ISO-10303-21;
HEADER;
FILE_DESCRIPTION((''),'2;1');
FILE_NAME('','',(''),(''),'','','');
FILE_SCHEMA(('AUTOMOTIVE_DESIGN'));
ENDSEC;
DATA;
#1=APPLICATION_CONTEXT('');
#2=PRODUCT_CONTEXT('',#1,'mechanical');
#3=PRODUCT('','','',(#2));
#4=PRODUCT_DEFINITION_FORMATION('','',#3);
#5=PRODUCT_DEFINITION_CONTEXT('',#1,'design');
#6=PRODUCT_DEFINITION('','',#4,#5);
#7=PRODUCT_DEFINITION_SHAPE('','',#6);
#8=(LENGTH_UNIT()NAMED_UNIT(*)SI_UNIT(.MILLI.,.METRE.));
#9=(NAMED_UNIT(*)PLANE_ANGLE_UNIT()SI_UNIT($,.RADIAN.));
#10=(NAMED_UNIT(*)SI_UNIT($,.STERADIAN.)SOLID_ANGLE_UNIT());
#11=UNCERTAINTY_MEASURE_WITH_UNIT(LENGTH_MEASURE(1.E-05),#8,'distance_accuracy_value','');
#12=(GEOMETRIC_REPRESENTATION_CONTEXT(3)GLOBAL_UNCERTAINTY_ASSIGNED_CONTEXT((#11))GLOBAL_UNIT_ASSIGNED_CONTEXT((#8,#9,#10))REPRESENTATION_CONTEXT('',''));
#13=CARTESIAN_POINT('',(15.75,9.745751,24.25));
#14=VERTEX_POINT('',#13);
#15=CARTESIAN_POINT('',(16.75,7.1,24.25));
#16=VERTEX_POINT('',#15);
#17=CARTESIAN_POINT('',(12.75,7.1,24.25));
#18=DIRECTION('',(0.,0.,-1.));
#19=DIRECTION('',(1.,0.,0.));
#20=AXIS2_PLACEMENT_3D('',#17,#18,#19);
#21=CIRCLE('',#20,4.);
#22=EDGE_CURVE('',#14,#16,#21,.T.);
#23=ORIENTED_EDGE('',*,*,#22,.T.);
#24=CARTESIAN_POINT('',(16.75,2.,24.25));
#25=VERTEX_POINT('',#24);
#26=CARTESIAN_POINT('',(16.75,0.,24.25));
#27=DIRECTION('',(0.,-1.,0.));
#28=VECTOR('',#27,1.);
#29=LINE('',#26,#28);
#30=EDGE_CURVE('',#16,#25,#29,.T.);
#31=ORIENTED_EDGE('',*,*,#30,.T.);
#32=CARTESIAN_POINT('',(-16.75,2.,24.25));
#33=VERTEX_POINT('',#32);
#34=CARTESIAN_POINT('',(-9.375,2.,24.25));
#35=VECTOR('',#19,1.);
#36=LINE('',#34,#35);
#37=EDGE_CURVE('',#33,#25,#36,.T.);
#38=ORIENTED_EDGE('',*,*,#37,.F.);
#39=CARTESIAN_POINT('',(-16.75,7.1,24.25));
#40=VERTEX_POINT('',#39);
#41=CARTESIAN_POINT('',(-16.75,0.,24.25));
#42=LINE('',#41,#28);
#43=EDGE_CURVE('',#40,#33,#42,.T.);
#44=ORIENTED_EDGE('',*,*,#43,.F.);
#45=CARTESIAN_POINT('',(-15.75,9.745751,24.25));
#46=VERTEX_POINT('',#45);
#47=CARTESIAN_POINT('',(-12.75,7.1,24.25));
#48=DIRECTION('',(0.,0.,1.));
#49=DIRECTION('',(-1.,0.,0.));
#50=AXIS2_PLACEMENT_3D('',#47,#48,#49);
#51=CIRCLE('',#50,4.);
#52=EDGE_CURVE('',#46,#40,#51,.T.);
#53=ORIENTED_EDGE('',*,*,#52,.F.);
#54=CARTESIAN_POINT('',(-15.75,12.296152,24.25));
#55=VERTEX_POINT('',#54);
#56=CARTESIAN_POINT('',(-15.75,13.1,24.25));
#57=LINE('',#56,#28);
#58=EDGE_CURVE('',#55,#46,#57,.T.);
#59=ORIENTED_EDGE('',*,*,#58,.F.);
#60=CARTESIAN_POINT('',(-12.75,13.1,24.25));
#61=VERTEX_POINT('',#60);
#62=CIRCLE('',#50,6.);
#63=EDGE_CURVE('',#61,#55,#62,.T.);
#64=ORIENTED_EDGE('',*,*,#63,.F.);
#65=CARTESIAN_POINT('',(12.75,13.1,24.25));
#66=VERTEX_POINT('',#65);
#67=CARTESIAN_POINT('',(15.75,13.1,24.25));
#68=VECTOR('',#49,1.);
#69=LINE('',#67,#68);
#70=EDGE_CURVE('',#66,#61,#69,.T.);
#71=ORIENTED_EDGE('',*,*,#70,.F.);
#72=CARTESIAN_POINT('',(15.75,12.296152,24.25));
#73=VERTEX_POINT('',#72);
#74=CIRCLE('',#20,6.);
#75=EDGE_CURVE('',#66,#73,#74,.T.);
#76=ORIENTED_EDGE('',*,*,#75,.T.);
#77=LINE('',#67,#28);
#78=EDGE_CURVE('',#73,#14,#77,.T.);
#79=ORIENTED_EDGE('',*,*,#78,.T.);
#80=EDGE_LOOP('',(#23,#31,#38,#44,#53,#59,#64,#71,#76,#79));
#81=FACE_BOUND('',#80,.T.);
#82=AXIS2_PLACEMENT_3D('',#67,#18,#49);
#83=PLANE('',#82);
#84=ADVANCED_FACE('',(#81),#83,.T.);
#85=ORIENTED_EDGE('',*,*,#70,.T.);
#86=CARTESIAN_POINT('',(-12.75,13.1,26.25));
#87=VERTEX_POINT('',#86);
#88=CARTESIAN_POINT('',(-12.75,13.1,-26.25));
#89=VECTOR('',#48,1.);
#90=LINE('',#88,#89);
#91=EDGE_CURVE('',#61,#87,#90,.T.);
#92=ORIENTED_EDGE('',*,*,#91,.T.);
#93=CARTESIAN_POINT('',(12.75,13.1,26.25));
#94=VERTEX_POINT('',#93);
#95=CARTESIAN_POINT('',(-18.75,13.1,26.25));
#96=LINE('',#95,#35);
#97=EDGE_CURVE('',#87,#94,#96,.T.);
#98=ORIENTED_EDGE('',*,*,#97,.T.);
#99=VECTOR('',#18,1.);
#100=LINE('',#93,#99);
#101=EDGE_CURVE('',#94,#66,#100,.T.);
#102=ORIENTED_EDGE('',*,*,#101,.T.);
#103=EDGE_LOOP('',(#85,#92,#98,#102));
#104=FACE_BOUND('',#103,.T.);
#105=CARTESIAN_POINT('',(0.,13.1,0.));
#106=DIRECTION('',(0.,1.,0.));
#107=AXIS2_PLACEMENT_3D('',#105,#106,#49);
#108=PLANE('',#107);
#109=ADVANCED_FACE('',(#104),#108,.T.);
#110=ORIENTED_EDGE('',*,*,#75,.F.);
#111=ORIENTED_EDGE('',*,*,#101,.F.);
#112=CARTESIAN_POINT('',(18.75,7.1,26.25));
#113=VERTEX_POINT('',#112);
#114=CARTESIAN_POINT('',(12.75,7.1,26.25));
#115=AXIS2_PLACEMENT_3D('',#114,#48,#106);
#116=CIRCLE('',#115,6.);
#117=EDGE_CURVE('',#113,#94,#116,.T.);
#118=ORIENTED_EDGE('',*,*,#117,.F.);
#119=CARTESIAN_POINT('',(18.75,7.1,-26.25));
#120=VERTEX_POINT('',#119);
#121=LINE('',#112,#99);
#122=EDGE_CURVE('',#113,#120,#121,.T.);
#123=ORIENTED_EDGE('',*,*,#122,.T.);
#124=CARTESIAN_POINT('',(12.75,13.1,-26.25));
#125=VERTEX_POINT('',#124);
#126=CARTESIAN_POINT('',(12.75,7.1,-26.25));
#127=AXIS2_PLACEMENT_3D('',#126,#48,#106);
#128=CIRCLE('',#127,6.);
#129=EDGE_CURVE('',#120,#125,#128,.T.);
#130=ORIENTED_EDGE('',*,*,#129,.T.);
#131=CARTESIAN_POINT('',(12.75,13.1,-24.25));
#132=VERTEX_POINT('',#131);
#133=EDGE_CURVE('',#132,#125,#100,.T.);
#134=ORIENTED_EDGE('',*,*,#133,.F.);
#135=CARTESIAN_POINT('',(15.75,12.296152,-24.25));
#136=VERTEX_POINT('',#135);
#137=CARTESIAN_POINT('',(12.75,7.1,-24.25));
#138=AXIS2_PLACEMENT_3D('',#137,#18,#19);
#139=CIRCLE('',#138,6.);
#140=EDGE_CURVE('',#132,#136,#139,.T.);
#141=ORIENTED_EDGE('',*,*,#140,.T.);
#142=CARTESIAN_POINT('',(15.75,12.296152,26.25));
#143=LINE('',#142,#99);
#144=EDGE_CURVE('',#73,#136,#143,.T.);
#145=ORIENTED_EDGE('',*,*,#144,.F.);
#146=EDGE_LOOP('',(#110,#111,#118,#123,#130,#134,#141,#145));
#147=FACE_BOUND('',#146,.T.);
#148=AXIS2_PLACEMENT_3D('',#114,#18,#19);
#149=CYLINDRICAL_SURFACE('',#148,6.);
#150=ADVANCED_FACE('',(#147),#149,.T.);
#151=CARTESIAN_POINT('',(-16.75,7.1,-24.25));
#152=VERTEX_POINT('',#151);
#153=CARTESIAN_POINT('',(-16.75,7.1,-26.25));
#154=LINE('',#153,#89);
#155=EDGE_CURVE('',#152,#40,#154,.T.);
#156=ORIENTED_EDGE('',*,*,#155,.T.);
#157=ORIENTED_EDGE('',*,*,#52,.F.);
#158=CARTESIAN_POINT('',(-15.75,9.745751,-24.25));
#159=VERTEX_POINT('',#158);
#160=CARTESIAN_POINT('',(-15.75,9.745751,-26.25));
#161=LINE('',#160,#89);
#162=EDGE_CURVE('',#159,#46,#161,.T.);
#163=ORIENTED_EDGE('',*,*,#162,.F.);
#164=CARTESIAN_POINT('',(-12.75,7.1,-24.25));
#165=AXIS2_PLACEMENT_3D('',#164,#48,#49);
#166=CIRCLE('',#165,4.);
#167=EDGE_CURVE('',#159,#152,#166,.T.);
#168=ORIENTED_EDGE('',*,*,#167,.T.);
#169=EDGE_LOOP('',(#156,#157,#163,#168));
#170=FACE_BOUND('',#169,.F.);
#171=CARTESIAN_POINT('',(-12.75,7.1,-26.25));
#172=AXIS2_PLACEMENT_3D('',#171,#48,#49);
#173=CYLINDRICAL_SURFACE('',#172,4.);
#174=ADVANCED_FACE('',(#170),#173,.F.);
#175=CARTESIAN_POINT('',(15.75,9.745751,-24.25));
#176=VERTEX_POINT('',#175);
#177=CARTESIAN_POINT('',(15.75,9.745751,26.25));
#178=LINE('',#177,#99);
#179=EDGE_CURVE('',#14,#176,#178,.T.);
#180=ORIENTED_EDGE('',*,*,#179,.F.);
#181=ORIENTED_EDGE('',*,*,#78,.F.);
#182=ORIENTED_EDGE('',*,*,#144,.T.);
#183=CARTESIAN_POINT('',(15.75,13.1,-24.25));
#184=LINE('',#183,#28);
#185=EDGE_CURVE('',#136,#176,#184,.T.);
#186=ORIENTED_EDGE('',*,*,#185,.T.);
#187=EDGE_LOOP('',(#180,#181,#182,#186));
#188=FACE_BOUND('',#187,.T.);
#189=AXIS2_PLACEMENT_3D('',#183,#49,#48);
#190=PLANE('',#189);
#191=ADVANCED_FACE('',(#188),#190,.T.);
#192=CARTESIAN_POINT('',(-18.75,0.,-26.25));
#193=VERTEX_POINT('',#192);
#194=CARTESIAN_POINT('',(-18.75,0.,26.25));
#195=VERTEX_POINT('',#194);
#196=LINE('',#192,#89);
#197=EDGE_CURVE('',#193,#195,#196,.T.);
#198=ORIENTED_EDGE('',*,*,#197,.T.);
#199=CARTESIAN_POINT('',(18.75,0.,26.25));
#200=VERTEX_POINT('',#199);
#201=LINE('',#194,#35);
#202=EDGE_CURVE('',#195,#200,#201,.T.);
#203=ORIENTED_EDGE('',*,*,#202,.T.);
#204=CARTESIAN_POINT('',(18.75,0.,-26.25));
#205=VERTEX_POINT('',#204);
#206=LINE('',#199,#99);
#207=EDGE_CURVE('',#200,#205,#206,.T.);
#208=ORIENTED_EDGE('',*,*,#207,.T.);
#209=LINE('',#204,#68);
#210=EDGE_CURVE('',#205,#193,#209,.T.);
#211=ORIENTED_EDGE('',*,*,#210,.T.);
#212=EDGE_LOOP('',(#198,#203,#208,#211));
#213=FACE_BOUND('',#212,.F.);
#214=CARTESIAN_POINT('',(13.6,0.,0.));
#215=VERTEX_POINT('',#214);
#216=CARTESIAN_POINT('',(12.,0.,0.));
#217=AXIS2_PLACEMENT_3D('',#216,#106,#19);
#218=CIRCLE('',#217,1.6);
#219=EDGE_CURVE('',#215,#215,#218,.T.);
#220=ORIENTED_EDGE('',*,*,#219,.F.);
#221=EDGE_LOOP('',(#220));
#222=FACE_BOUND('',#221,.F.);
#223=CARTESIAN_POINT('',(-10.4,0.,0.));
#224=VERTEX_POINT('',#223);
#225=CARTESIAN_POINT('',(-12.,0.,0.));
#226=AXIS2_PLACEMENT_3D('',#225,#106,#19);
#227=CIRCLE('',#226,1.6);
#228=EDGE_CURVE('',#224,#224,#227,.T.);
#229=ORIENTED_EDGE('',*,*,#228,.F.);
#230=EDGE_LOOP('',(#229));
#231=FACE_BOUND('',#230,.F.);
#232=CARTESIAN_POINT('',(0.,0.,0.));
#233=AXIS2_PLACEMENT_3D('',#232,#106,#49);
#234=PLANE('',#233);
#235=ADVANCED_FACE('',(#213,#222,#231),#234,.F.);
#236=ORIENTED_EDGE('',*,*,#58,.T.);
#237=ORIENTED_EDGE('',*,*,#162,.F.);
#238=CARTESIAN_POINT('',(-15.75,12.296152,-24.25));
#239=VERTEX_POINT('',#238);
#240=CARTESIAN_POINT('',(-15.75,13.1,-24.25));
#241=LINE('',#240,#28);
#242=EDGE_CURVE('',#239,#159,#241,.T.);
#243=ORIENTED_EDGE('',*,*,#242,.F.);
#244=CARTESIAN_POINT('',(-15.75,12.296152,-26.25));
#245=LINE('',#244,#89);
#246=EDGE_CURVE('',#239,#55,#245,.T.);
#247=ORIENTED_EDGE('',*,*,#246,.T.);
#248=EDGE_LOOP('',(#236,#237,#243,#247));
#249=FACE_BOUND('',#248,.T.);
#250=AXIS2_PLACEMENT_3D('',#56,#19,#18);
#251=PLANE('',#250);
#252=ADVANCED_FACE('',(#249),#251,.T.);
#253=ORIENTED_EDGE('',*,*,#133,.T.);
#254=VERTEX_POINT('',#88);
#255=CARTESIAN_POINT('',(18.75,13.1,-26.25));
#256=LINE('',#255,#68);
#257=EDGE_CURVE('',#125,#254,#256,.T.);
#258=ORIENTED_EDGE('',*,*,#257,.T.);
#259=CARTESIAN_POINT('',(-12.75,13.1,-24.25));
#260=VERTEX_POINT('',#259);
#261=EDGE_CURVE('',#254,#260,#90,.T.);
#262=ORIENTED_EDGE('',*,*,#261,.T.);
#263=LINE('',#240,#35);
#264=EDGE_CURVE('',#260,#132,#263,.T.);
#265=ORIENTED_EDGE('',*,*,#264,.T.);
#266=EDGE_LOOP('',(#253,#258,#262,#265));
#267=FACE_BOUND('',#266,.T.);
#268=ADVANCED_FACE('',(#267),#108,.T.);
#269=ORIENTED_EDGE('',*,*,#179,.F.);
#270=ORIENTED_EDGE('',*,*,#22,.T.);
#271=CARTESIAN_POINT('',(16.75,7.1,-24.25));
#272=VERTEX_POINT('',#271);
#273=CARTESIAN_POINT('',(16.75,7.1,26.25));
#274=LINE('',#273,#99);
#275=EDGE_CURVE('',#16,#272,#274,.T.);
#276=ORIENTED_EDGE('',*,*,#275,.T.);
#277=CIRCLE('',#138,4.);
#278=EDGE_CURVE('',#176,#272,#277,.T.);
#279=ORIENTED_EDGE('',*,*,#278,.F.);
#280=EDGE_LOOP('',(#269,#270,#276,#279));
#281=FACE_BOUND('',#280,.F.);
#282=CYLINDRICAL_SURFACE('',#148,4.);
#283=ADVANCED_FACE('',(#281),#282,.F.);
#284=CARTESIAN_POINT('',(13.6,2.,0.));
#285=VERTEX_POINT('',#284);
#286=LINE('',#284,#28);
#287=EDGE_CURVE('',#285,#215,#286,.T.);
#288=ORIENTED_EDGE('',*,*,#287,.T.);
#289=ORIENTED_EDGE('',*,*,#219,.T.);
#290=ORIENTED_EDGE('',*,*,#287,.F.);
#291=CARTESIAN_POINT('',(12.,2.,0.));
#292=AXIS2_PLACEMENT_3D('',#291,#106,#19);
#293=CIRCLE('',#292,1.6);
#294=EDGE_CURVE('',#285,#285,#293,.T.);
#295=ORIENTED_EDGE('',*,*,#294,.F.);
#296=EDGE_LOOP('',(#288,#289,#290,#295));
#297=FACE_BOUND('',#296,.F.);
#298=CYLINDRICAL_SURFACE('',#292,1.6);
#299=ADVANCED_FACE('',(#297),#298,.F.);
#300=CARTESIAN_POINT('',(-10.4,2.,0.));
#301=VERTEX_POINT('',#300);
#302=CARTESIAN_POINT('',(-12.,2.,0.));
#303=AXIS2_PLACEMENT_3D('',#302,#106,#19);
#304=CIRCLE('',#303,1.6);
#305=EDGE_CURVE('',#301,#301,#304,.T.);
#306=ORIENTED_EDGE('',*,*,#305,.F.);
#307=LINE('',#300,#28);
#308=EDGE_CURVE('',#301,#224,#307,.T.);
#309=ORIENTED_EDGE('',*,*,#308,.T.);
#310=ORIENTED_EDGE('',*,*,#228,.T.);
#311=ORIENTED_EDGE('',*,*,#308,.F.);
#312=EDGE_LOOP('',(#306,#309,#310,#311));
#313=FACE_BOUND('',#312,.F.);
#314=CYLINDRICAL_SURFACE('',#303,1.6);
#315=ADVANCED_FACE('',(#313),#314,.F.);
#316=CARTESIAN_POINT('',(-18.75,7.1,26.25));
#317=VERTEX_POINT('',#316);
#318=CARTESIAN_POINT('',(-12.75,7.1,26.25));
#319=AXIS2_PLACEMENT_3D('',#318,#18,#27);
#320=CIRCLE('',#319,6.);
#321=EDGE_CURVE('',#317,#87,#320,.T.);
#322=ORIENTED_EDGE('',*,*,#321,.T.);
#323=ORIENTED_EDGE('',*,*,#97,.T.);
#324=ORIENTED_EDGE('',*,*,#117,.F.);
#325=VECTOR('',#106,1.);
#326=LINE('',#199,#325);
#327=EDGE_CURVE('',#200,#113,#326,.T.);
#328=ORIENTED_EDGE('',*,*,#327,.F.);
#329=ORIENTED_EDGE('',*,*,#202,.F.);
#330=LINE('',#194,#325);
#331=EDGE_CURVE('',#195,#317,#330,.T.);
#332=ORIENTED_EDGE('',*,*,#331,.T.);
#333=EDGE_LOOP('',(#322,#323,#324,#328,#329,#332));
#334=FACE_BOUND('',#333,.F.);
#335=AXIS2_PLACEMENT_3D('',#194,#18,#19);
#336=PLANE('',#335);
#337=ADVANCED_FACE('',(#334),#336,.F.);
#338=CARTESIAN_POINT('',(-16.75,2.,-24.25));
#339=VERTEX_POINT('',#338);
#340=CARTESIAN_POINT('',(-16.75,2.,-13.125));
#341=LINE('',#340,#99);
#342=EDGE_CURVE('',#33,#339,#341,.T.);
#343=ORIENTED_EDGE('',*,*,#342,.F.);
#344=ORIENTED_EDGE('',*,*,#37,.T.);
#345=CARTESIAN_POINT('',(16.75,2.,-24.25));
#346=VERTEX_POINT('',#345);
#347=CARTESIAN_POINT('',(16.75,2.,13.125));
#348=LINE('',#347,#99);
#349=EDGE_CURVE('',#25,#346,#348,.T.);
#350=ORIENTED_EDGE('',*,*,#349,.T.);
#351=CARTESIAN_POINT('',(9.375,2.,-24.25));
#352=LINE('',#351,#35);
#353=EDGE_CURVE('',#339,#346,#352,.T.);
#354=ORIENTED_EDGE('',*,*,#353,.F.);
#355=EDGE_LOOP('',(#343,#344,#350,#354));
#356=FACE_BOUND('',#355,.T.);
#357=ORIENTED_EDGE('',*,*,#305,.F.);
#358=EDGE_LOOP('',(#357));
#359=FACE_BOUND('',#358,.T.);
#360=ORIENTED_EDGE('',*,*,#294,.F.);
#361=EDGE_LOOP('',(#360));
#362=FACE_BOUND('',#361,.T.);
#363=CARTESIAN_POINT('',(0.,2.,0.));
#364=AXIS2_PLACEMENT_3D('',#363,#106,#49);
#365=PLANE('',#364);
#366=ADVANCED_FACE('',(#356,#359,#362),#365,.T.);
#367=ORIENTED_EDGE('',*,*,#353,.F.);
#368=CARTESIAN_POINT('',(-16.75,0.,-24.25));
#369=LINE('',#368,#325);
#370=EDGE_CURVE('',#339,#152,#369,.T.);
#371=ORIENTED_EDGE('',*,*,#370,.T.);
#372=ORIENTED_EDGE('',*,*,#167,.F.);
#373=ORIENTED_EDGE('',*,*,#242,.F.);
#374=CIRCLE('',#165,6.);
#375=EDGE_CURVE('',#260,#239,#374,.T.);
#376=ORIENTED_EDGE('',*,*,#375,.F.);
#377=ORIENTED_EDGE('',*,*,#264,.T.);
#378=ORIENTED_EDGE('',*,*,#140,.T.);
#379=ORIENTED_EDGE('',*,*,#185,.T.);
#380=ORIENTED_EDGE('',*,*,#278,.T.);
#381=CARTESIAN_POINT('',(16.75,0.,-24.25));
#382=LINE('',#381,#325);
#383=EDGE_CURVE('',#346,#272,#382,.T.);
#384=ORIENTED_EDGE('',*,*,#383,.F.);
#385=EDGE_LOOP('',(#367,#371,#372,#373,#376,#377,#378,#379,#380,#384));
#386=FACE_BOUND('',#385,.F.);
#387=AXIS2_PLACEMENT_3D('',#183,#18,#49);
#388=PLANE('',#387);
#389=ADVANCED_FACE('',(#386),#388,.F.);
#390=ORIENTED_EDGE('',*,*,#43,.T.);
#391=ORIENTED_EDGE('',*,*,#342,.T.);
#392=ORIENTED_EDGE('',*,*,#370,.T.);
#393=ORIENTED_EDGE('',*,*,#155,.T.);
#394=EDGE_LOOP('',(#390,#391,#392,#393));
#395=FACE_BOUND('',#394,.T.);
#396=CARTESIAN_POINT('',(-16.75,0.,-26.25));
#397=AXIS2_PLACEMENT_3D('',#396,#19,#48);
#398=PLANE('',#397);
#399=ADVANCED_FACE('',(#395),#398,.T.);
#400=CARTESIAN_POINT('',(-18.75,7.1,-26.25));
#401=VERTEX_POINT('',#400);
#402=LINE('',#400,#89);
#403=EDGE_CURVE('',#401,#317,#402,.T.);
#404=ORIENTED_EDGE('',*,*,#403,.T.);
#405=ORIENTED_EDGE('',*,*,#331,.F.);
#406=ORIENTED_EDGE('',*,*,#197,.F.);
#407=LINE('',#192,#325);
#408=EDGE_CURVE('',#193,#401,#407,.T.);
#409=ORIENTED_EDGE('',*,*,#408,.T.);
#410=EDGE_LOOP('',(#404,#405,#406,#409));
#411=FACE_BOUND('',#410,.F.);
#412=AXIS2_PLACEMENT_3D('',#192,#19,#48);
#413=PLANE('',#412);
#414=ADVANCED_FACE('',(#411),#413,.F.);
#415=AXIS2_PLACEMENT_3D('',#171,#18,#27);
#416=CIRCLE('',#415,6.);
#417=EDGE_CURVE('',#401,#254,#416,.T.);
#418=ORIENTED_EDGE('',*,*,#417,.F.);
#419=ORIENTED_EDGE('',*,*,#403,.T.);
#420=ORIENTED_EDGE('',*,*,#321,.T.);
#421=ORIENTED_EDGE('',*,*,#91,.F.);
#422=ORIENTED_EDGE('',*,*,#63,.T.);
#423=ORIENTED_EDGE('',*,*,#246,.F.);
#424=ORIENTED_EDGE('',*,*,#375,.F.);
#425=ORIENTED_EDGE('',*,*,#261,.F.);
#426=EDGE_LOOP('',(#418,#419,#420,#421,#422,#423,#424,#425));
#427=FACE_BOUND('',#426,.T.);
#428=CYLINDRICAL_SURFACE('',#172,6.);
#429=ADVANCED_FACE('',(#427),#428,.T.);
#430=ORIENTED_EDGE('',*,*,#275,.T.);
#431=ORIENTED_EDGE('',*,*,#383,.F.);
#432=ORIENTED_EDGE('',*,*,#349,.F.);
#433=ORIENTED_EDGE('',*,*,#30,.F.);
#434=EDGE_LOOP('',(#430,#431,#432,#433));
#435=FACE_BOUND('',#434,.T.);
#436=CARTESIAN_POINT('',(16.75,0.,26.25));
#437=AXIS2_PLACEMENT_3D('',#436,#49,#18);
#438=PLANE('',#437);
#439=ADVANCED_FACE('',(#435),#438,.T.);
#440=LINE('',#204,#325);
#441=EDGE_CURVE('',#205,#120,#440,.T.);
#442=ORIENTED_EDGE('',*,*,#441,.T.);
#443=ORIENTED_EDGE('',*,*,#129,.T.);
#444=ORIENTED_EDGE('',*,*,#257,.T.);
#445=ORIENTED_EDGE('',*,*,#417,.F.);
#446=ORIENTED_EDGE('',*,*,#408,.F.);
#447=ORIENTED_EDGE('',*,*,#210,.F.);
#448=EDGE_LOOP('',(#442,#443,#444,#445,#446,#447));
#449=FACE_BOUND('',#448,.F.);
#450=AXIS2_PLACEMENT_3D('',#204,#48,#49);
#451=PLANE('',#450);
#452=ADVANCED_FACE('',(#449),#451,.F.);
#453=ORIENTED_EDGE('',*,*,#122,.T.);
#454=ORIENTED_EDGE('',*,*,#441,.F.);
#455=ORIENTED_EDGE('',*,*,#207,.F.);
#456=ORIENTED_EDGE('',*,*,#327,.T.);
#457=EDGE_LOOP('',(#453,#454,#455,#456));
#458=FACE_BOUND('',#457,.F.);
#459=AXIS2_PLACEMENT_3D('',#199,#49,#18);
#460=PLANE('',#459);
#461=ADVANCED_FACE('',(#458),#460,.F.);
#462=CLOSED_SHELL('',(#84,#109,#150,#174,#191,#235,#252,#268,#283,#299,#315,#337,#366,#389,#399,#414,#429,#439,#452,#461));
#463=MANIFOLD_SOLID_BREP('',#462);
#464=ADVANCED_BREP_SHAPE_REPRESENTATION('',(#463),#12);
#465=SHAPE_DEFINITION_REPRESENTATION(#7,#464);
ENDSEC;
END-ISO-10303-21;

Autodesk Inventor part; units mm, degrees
ref_plane "YZ Plane" through (0, 0, 0) normal (1, 0, 0) x (0, 1, 0)
ref_plane "XZ Plane" through (0, 0, 0) normal (0, 1, 0) x (-1, 0, 0)
ref_plane "XY Plane" through (0, 0, 0) normal (0, 0, 1) x (1, 0, 0)
sketch "スケッチ1" plane through (0, 0, 0) normal (0, 1, 0) x (-1, 0, 0)
  line L0 (-18.75, -26.25) -> (18.75, -26.25)
  line L1 (18.75, -26.25) -> (18.75, 26.25)
  line L2 (18.75, 26.25) -> (-18.75, 26.25)
  line L3 (-18.75, 26.25) -> (-18.75, -26.25)
  line L4 (-18.75, -26.25) -> (18.75, 26.25) construction
  line L5 (18.75, -26.25) -> (-18.75, 26.25) construction
  point P0 (0, 0)
  dimension "d0" = 37.5
  dimension "d1" = 52.5
extrude "押し出し1" add sketch "スケッチ1" along normal blind 13.1
fillet "フィレット1" radius 6 2 edges at (18.75, 13.1, 0) (-18.75, 13.1, 0)
shell "シェル1" thickness 2 removed faces 0
sketch "スケッチ2" plane through (0, 13.1, 0) normal (0, 1, 0) x (1, 0, 0)
  line L0 (16.75, 24.25) -> (-16.75, 24.25) projected
  line L1 (15.75, -24.25) -> (-15.75, -24.25)
  line L2 (-15.75, -24.25) -> (-15.75, 24.25)
  line L3 (-15.75, 24.25) -> (15.75, 24.25)
  line L4 (15.75, 24.25) -> (15.75, -24.25)
  line L5 (15.75, -24.25) -> (-15.75, 24.25) construction
  line L6 (-15.75, -24.25) -> (15.75, 24.25) construction
  line L7 (-12.75, -26.25) -> (-12.75, 26.25) projected
  point P0 (0, 0)
  dimension "d8" = 3
extrude "押し出し2" cut sketch "スケッチ2" against normal blind 5
sketch "スケッチ3" plane through (-16.75, 2, 24.25) normal (0, 1, 0) x (1, 0, 0)
  circle A0 centre (28.75, 24.25) radius 1.6
  circle A1 centre (4.75, 24.25) radius 1.6
  line L0 (4, 48.5) -> (29.5, 48.5) projected
  line L1 (16.75, 48.5) -> (16.75, 0) construction
  line L2 (0, 0) -> (33.5, 0) projected
  point P0 (16.75, 24.25)
  dimension "d9" = 3.2
  dimension "d11" = 24
extrude "押し出し3" cut sketch "スケッチ3" against normal through all
properties part number "battery_box"
